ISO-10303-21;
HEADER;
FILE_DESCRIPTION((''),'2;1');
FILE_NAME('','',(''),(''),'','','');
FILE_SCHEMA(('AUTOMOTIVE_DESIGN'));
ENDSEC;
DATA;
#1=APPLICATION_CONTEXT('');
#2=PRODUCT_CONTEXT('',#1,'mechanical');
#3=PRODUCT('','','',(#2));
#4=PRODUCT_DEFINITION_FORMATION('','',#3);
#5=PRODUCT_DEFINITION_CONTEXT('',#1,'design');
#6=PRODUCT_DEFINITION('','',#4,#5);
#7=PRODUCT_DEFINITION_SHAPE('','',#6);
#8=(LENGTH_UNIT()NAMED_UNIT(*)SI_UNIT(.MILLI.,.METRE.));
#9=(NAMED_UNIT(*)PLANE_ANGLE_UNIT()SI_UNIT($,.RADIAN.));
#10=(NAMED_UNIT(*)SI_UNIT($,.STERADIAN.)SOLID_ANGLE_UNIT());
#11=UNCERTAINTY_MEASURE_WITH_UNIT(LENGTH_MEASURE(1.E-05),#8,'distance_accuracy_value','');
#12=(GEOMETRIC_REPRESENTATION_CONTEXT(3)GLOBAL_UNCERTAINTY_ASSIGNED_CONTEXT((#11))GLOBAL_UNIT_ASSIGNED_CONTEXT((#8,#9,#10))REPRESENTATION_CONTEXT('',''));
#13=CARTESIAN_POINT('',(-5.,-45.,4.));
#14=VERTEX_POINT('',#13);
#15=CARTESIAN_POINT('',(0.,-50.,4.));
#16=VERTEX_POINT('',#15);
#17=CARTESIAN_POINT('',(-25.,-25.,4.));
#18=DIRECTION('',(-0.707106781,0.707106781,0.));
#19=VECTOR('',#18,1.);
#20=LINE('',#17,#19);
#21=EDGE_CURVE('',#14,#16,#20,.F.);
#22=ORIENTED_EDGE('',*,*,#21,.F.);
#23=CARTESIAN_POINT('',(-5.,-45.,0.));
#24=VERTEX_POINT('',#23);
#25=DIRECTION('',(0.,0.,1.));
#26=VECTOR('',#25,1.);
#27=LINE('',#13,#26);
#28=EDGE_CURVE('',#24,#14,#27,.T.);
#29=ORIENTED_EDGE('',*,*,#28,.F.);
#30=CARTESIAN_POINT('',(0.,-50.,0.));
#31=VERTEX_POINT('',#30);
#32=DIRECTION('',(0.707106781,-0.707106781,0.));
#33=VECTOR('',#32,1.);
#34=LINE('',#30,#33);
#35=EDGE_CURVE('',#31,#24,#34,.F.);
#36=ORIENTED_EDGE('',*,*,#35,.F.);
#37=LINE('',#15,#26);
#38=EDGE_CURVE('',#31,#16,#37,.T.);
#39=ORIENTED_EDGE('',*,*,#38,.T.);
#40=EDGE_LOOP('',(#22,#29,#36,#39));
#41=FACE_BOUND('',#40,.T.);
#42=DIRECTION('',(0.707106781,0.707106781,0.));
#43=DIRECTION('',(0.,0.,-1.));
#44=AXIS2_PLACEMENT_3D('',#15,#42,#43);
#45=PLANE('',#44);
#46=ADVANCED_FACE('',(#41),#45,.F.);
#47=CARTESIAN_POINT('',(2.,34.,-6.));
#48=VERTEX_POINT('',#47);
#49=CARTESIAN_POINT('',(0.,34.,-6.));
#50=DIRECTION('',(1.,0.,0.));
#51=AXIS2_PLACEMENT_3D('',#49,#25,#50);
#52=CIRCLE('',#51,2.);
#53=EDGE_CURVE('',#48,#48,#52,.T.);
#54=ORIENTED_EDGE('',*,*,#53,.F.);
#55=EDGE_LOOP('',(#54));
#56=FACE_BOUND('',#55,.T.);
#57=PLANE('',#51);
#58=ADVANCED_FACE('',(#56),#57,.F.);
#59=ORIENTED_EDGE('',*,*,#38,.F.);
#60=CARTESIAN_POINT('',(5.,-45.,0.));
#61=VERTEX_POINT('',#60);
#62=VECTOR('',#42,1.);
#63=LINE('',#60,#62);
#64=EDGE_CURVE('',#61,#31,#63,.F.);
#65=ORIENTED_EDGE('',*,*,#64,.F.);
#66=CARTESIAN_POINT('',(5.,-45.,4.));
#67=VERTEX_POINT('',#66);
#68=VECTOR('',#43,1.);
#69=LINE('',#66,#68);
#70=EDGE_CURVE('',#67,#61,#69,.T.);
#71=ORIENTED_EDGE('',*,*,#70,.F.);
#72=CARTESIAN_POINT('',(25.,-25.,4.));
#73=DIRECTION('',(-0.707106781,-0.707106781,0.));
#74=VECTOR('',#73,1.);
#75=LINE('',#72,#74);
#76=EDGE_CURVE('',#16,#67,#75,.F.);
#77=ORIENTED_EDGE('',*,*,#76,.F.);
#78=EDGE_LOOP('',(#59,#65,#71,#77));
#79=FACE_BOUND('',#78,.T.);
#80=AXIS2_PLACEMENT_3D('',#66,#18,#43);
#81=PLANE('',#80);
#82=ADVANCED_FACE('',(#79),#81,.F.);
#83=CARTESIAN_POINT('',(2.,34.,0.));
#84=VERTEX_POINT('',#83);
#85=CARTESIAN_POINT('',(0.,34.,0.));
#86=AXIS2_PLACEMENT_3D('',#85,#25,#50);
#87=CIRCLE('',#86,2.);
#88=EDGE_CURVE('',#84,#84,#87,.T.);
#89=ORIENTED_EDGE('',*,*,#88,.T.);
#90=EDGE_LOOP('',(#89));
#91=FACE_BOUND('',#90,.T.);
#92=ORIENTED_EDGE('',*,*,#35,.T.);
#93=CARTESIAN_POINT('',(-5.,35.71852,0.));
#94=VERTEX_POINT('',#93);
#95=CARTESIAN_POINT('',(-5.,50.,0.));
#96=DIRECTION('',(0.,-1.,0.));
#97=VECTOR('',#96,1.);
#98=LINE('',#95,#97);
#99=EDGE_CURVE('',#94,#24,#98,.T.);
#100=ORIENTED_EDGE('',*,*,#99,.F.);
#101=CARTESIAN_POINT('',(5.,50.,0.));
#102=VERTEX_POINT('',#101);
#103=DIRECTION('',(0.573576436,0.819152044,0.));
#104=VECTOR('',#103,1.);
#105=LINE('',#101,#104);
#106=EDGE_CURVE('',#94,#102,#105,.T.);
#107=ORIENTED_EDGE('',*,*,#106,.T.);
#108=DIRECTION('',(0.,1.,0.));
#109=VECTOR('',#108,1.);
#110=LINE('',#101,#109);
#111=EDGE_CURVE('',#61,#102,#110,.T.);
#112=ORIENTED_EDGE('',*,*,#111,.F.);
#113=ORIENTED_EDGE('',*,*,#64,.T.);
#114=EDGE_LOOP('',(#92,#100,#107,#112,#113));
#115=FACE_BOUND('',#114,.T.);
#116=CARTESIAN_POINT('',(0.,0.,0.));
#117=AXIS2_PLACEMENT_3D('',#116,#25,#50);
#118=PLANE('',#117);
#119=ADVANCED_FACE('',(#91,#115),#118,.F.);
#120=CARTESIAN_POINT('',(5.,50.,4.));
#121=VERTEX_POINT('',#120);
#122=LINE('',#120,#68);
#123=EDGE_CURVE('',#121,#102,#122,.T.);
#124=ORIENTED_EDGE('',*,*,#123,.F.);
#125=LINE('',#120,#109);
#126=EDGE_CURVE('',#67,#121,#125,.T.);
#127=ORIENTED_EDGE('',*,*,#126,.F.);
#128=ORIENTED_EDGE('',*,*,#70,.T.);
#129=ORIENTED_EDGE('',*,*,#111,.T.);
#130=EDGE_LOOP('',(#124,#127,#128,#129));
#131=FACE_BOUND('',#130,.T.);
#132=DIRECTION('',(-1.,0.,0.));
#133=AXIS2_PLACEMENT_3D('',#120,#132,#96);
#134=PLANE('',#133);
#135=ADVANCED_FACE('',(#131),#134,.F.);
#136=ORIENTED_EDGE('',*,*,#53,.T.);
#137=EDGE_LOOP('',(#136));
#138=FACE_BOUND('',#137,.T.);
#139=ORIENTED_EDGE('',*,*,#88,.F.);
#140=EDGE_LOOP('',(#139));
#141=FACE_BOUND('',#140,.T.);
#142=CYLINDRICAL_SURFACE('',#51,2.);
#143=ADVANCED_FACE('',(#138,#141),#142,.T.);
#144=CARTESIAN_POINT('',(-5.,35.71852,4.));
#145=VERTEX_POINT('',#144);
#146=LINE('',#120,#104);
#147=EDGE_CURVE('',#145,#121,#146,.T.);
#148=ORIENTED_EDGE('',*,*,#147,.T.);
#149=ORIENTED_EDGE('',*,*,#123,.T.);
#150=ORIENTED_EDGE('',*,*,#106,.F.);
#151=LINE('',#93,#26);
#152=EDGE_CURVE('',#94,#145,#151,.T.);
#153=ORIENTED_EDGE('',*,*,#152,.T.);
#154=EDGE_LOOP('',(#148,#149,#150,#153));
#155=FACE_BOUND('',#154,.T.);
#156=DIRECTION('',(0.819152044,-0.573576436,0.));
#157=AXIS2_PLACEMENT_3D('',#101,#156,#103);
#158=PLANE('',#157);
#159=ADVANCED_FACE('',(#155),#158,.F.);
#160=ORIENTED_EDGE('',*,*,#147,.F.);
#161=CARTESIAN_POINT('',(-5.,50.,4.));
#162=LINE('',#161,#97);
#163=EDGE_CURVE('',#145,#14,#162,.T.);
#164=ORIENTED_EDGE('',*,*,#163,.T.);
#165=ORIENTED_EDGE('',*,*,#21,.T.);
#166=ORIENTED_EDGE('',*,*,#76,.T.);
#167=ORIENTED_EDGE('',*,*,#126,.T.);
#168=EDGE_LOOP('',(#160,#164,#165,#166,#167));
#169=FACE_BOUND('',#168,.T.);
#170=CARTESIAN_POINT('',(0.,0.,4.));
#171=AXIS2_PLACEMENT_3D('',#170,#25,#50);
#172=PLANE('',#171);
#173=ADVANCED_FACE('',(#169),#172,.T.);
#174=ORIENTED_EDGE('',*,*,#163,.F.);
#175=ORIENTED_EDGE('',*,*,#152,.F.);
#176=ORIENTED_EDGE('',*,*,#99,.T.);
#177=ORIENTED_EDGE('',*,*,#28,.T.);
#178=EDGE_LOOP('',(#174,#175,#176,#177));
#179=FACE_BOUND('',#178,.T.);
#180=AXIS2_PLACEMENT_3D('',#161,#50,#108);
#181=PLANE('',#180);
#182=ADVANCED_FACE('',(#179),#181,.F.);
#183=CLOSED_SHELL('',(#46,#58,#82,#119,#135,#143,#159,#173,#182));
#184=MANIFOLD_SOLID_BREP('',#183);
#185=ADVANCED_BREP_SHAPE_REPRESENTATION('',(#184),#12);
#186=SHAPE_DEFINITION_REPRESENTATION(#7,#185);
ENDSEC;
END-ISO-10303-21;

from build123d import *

# Parameters (mm, degrees)
SKETCH1_W           = 10
SKETCH1_H           = 100
BOSS_EXTRUDE1_DEPTH = 4
CUT_EXTRUDE1_DEPTH  = 4
CHAMFER1_SIZE       = 5
SKETCH3_R           = 2
BOSS_EXTRUDE2_DEPTH = 10


with BuildPart() as part:
    # Sketch1 → Boss-Extrude1 (new body)
    with BuildSketch(Plane.XY):
        Rectangle(SKETCH1_W, SKETCH1_H)
    extrude(amount=BOSS_EXTRUDE1_DEPTH)

    # Sketch2 → Cut-Extrude1 (cut)
    with BuildSketch(Plane.XY.offset(4)):
        Polygon((5, 50), (-5, 35.718519933), (-5, 50), align=None)
    extrude(amount=-CUT_EXTRUDE1_DEPTH, mode=Mode.SUBTRACT)

    # Chamfer1
    chamfer1_edges = [part.edges().sort_by_distance(p)[0] for p in [
        (-5, -50, 2),
        (5, -50, 2),
    ]]
    chamfer(chamfer1_edges, length=CHAMFER1_SIZE - 0.0001)  # a hair under: the kernel refuses the full size

    # Sketch3 → Boss-Extrude2 (add)
    with BuildSketch(Plane.XY.offset(4)):
        with Locations((0, 34)):
            Circle(SKETCH3_R)
    extrude(amount=-BOSS_EXTRUDE2_DEPTH)


solid = part.part
